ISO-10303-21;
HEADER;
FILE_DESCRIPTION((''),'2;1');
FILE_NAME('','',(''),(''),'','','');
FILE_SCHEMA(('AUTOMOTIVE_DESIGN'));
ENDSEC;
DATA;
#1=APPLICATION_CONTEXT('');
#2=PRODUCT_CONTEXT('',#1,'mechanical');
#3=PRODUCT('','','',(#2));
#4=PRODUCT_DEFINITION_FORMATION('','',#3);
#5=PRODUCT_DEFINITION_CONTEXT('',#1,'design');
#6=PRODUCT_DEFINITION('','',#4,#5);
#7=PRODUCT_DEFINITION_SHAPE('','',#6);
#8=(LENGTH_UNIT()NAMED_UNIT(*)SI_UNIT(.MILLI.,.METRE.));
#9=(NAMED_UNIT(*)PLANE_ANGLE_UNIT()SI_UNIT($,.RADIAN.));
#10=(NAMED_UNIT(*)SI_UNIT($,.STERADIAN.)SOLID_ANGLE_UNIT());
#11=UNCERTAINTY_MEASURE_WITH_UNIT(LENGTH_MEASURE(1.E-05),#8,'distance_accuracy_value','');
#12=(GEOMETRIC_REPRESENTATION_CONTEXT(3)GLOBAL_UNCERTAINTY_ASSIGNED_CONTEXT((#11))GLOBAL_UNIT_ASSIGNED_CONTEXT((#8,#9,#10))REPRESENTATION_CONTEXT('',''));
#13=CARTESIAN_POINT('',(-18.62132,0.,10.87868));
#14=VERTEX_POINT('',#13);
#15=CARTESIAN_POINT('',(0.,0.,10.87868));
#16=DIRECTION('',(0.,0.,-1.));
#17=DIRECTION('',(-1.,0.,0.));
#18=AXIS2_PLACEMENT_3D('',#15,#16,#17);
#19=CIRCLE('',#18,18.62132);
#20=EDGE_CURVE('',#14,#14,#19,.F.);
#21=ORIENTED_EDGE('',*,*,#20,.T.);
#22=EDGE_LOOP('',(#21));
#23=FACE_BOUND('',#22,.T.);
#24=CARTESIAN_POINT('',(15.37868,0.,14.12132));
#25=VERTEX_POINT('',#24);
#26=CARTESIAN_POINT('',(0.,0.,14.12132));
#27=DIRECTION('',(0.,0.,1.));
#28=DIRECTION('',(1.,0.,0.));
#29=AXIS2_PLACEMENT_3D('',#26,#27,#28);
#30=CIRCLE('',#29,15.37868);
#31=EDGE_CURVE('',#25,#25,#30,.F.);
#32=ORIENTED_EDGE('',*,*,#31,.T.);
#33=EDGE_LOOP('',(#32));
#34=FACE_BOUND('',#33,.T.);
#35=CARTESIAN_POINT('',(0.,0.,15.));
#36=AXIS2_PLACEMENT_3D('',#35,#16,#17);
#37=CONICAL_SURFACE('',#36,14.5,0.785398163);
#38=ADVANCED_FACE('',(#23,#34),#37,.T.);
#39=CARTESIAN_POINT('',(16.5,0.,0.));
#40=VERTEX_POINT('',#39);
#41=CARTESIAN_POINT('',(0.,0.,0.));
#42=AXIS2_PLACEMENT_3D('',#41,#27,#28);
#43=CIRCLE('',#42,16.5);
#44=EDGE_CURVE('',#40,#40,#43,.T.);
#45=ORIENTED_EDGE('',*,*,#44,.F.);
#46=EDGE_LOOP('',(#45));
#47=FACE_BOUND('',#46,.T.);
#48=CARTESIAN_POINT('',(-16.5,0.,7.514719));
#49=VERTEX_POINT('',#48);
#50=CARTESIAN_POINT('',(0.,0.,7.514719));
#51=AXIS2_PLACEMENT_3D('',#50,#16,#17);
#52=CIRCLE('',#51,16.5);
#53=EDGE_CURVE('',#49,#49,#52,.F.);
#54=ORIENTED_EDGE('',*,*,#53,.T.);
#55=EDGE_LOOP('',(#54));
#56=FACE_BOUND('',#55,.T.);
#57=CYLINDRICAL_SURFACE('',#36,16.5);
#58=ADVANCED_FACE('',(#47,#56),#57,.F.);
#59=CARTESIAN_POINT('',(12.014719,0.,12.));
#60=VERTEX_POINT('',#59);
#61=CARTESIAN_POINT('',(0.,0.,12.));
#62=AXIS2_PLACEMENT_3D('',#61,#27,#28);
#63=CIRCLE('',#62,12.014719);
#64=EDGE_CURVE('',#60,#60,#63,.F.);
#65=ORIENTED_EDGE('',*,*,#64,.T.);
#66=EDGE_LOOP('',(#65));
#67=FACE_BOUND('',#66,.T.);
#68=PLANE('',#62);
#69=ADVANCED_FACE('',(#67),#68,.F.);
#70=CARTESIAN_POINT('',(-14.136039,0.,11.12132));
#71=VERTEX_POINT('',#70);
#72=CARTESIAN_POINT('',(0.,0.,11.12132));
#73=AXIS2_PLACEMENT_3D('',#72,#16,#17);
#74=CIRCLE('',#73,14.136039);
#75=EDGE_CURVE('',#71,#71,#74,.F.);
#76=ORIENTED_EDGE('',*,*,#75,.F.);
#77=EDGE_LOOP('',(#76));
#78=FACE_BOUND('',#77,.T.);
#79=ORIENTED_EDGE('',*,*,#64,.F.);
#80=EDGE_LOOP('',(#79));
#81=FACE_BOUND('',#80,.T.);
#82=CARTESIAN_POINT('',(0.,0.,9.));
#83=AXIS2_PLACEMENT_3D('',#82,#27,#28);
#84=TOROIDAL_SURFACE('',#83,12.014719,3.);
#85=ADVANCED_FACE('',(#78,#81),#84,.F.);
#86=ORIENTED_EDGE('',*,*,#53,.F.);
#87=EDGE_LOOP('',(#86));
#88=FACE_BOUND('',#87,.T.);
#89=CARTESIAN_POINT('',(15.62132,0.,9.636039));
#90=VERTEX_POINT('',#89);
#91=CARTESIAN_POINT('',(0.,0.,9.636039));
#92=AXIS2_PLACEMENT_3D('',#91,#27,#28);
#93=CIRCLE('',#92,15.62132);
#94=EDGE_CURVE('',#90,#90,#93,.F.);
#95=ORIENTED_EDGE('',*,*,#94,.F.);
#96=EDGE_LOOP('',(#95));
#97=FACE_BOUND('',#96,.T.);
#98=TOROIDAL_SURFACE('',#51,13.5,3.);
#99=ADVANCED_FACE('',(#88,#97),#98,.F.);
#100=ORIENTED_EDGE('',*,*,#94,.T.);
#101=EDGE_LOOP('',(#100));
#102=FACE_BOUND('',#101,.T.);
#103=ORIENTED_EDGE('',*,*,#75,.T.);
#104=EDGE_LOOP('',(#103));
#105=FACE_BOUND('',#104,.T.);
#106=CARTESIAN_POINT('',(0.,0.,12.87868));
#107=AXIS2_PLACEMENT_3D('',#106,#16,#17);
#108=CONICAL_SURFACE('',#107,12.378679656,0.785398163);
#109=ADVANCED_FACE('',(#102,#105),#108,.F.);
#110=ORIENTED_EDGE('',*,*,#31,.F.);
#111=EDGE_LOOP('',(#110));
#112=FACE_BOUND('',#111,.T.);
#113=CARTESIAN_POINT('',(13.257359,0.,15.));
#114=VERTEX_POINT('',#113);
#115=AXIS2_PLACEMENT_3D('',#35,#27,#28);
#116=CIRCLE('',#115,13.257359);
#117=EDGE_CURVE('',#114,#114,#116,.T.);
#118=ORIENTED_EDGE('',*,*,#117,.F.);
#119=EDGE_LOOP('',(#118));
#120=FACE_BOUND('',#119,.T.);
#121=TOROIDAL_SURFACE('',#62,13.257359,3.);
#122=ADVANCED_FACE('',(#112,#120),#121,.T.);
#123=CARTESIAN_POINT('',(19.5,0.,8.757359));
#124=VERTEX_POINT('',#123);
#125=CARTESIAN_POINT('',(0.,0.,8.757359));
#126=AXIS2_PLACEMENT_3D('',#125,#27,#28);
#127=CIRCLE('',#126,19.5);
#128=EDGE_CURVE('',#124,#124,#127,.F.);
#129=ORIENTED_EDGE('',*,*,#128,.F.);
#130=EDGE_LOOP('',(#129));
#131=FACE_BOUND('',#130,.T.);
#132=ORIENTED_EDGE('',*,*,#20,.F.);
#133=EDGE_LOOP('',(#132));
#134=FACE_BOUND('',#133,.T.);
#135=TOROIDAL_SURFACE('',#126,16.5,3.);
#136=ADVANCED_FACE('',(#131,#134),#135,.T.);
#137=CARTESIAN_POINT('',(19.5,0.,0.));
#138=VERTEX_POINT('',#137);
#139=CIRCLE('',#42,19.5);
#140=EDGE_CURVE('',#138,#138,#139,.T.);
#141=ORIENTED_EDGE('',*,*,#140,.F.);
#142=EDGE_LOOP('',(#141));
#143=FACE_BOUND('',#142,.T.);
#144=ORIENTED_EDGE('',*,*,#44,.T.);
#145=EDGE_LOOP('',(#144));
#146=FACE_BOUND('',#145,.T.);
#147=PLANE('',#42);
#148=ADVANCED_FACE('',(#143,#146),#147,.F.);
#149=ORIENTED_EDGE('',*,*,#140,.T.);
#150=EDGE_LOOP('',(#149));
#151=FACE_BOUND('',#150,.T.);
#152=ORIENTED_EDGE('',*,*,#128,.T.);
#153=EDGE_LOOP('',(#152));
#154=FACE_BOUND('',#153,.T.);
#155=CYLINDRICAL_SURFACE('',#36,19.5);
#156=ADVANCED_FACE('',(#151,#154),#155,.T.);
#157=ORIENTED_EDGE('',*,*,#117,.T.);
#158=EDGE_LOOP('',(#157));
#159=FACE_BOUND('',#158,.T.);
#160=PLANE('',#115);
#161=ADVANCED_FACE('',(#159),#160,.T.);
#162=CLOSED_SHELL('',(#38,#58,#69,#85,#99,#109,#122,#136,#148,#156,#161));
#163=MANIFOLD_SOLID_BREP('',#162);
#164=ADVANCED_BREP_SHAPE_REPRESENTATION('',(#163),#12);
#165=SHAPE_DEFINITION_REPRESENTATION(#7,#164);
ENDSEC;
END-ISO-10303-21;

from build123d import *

# Parameters (mm, degrees)
SKETCH1_R           = 19.5
BOSS_EXTRUDE1_DEPTH = 15
CHAMFER1_SIZE       = 5
FILLET1_R           = 3
SHELL1_T            = -3


with BuildPart() as part:
    # Sketch1 → Boss-Extrude1 (new body)
    with BuildSketch(Plane.XY):
        Circle(SKETCH1_R)
    extrude(amount=BOSS_EXTRUDE1_DEPTH)

    # Chamfer1
    chamfer1_edges = [part.edges().sort_by_distance(p)[0] for p in [
        (-19.5, 0, 15),
    ]]
    chamfer(chamfer1_edges, length=CHAMFER1_SIZE)

    # Fillet1
    fillet1_edges = [part.edges().sort_by_distance(p)[0] for p in [
        (-14.5, 0, 15),
        (-19.5, 0, 10),
    ]]
    fillet(fillet1_edges, radius=FILLET1_R)

    # Shell1
    shell1_openings = [part.faces().sort_by_distance(p)[0] for p in [
        (0, 0, 0),
    ]]
    offset(amount=SHELL1_T, openings=shell1_openings, kind=Kind.INTERSECTION)

    # Fillet2: read off the stored shape, not the designer's step
    # Fillet2 outline → Fillet2 (revolve)
    with BuildSketch(Plane.XZ):
        with BuildLine():
            Line((16.5, 9.636038969), (15.621320344, 9.636038969))
            ThreePointArc((15.621320344, 9.636038969), (16.271638598, 8.662768923), (16.5, 7.514718626))
            Line((16.5, 7.514718626), (16.5, 9.636038969))
        make_face()
        with BuildLine():
            ThreePointArc((12.014718626, 12), (13.162768923, 11.771638598), (14.136038969, 11.121320344))
            Line((14.136038969, 11.121320344), (14.136038969, 12))
            Line((14.136038969, 12), (12.014718626, 12))
        make_face()
    revolve(axis=Axis((0, 0, 0), (0, 0, 1)))


solid = part.part
